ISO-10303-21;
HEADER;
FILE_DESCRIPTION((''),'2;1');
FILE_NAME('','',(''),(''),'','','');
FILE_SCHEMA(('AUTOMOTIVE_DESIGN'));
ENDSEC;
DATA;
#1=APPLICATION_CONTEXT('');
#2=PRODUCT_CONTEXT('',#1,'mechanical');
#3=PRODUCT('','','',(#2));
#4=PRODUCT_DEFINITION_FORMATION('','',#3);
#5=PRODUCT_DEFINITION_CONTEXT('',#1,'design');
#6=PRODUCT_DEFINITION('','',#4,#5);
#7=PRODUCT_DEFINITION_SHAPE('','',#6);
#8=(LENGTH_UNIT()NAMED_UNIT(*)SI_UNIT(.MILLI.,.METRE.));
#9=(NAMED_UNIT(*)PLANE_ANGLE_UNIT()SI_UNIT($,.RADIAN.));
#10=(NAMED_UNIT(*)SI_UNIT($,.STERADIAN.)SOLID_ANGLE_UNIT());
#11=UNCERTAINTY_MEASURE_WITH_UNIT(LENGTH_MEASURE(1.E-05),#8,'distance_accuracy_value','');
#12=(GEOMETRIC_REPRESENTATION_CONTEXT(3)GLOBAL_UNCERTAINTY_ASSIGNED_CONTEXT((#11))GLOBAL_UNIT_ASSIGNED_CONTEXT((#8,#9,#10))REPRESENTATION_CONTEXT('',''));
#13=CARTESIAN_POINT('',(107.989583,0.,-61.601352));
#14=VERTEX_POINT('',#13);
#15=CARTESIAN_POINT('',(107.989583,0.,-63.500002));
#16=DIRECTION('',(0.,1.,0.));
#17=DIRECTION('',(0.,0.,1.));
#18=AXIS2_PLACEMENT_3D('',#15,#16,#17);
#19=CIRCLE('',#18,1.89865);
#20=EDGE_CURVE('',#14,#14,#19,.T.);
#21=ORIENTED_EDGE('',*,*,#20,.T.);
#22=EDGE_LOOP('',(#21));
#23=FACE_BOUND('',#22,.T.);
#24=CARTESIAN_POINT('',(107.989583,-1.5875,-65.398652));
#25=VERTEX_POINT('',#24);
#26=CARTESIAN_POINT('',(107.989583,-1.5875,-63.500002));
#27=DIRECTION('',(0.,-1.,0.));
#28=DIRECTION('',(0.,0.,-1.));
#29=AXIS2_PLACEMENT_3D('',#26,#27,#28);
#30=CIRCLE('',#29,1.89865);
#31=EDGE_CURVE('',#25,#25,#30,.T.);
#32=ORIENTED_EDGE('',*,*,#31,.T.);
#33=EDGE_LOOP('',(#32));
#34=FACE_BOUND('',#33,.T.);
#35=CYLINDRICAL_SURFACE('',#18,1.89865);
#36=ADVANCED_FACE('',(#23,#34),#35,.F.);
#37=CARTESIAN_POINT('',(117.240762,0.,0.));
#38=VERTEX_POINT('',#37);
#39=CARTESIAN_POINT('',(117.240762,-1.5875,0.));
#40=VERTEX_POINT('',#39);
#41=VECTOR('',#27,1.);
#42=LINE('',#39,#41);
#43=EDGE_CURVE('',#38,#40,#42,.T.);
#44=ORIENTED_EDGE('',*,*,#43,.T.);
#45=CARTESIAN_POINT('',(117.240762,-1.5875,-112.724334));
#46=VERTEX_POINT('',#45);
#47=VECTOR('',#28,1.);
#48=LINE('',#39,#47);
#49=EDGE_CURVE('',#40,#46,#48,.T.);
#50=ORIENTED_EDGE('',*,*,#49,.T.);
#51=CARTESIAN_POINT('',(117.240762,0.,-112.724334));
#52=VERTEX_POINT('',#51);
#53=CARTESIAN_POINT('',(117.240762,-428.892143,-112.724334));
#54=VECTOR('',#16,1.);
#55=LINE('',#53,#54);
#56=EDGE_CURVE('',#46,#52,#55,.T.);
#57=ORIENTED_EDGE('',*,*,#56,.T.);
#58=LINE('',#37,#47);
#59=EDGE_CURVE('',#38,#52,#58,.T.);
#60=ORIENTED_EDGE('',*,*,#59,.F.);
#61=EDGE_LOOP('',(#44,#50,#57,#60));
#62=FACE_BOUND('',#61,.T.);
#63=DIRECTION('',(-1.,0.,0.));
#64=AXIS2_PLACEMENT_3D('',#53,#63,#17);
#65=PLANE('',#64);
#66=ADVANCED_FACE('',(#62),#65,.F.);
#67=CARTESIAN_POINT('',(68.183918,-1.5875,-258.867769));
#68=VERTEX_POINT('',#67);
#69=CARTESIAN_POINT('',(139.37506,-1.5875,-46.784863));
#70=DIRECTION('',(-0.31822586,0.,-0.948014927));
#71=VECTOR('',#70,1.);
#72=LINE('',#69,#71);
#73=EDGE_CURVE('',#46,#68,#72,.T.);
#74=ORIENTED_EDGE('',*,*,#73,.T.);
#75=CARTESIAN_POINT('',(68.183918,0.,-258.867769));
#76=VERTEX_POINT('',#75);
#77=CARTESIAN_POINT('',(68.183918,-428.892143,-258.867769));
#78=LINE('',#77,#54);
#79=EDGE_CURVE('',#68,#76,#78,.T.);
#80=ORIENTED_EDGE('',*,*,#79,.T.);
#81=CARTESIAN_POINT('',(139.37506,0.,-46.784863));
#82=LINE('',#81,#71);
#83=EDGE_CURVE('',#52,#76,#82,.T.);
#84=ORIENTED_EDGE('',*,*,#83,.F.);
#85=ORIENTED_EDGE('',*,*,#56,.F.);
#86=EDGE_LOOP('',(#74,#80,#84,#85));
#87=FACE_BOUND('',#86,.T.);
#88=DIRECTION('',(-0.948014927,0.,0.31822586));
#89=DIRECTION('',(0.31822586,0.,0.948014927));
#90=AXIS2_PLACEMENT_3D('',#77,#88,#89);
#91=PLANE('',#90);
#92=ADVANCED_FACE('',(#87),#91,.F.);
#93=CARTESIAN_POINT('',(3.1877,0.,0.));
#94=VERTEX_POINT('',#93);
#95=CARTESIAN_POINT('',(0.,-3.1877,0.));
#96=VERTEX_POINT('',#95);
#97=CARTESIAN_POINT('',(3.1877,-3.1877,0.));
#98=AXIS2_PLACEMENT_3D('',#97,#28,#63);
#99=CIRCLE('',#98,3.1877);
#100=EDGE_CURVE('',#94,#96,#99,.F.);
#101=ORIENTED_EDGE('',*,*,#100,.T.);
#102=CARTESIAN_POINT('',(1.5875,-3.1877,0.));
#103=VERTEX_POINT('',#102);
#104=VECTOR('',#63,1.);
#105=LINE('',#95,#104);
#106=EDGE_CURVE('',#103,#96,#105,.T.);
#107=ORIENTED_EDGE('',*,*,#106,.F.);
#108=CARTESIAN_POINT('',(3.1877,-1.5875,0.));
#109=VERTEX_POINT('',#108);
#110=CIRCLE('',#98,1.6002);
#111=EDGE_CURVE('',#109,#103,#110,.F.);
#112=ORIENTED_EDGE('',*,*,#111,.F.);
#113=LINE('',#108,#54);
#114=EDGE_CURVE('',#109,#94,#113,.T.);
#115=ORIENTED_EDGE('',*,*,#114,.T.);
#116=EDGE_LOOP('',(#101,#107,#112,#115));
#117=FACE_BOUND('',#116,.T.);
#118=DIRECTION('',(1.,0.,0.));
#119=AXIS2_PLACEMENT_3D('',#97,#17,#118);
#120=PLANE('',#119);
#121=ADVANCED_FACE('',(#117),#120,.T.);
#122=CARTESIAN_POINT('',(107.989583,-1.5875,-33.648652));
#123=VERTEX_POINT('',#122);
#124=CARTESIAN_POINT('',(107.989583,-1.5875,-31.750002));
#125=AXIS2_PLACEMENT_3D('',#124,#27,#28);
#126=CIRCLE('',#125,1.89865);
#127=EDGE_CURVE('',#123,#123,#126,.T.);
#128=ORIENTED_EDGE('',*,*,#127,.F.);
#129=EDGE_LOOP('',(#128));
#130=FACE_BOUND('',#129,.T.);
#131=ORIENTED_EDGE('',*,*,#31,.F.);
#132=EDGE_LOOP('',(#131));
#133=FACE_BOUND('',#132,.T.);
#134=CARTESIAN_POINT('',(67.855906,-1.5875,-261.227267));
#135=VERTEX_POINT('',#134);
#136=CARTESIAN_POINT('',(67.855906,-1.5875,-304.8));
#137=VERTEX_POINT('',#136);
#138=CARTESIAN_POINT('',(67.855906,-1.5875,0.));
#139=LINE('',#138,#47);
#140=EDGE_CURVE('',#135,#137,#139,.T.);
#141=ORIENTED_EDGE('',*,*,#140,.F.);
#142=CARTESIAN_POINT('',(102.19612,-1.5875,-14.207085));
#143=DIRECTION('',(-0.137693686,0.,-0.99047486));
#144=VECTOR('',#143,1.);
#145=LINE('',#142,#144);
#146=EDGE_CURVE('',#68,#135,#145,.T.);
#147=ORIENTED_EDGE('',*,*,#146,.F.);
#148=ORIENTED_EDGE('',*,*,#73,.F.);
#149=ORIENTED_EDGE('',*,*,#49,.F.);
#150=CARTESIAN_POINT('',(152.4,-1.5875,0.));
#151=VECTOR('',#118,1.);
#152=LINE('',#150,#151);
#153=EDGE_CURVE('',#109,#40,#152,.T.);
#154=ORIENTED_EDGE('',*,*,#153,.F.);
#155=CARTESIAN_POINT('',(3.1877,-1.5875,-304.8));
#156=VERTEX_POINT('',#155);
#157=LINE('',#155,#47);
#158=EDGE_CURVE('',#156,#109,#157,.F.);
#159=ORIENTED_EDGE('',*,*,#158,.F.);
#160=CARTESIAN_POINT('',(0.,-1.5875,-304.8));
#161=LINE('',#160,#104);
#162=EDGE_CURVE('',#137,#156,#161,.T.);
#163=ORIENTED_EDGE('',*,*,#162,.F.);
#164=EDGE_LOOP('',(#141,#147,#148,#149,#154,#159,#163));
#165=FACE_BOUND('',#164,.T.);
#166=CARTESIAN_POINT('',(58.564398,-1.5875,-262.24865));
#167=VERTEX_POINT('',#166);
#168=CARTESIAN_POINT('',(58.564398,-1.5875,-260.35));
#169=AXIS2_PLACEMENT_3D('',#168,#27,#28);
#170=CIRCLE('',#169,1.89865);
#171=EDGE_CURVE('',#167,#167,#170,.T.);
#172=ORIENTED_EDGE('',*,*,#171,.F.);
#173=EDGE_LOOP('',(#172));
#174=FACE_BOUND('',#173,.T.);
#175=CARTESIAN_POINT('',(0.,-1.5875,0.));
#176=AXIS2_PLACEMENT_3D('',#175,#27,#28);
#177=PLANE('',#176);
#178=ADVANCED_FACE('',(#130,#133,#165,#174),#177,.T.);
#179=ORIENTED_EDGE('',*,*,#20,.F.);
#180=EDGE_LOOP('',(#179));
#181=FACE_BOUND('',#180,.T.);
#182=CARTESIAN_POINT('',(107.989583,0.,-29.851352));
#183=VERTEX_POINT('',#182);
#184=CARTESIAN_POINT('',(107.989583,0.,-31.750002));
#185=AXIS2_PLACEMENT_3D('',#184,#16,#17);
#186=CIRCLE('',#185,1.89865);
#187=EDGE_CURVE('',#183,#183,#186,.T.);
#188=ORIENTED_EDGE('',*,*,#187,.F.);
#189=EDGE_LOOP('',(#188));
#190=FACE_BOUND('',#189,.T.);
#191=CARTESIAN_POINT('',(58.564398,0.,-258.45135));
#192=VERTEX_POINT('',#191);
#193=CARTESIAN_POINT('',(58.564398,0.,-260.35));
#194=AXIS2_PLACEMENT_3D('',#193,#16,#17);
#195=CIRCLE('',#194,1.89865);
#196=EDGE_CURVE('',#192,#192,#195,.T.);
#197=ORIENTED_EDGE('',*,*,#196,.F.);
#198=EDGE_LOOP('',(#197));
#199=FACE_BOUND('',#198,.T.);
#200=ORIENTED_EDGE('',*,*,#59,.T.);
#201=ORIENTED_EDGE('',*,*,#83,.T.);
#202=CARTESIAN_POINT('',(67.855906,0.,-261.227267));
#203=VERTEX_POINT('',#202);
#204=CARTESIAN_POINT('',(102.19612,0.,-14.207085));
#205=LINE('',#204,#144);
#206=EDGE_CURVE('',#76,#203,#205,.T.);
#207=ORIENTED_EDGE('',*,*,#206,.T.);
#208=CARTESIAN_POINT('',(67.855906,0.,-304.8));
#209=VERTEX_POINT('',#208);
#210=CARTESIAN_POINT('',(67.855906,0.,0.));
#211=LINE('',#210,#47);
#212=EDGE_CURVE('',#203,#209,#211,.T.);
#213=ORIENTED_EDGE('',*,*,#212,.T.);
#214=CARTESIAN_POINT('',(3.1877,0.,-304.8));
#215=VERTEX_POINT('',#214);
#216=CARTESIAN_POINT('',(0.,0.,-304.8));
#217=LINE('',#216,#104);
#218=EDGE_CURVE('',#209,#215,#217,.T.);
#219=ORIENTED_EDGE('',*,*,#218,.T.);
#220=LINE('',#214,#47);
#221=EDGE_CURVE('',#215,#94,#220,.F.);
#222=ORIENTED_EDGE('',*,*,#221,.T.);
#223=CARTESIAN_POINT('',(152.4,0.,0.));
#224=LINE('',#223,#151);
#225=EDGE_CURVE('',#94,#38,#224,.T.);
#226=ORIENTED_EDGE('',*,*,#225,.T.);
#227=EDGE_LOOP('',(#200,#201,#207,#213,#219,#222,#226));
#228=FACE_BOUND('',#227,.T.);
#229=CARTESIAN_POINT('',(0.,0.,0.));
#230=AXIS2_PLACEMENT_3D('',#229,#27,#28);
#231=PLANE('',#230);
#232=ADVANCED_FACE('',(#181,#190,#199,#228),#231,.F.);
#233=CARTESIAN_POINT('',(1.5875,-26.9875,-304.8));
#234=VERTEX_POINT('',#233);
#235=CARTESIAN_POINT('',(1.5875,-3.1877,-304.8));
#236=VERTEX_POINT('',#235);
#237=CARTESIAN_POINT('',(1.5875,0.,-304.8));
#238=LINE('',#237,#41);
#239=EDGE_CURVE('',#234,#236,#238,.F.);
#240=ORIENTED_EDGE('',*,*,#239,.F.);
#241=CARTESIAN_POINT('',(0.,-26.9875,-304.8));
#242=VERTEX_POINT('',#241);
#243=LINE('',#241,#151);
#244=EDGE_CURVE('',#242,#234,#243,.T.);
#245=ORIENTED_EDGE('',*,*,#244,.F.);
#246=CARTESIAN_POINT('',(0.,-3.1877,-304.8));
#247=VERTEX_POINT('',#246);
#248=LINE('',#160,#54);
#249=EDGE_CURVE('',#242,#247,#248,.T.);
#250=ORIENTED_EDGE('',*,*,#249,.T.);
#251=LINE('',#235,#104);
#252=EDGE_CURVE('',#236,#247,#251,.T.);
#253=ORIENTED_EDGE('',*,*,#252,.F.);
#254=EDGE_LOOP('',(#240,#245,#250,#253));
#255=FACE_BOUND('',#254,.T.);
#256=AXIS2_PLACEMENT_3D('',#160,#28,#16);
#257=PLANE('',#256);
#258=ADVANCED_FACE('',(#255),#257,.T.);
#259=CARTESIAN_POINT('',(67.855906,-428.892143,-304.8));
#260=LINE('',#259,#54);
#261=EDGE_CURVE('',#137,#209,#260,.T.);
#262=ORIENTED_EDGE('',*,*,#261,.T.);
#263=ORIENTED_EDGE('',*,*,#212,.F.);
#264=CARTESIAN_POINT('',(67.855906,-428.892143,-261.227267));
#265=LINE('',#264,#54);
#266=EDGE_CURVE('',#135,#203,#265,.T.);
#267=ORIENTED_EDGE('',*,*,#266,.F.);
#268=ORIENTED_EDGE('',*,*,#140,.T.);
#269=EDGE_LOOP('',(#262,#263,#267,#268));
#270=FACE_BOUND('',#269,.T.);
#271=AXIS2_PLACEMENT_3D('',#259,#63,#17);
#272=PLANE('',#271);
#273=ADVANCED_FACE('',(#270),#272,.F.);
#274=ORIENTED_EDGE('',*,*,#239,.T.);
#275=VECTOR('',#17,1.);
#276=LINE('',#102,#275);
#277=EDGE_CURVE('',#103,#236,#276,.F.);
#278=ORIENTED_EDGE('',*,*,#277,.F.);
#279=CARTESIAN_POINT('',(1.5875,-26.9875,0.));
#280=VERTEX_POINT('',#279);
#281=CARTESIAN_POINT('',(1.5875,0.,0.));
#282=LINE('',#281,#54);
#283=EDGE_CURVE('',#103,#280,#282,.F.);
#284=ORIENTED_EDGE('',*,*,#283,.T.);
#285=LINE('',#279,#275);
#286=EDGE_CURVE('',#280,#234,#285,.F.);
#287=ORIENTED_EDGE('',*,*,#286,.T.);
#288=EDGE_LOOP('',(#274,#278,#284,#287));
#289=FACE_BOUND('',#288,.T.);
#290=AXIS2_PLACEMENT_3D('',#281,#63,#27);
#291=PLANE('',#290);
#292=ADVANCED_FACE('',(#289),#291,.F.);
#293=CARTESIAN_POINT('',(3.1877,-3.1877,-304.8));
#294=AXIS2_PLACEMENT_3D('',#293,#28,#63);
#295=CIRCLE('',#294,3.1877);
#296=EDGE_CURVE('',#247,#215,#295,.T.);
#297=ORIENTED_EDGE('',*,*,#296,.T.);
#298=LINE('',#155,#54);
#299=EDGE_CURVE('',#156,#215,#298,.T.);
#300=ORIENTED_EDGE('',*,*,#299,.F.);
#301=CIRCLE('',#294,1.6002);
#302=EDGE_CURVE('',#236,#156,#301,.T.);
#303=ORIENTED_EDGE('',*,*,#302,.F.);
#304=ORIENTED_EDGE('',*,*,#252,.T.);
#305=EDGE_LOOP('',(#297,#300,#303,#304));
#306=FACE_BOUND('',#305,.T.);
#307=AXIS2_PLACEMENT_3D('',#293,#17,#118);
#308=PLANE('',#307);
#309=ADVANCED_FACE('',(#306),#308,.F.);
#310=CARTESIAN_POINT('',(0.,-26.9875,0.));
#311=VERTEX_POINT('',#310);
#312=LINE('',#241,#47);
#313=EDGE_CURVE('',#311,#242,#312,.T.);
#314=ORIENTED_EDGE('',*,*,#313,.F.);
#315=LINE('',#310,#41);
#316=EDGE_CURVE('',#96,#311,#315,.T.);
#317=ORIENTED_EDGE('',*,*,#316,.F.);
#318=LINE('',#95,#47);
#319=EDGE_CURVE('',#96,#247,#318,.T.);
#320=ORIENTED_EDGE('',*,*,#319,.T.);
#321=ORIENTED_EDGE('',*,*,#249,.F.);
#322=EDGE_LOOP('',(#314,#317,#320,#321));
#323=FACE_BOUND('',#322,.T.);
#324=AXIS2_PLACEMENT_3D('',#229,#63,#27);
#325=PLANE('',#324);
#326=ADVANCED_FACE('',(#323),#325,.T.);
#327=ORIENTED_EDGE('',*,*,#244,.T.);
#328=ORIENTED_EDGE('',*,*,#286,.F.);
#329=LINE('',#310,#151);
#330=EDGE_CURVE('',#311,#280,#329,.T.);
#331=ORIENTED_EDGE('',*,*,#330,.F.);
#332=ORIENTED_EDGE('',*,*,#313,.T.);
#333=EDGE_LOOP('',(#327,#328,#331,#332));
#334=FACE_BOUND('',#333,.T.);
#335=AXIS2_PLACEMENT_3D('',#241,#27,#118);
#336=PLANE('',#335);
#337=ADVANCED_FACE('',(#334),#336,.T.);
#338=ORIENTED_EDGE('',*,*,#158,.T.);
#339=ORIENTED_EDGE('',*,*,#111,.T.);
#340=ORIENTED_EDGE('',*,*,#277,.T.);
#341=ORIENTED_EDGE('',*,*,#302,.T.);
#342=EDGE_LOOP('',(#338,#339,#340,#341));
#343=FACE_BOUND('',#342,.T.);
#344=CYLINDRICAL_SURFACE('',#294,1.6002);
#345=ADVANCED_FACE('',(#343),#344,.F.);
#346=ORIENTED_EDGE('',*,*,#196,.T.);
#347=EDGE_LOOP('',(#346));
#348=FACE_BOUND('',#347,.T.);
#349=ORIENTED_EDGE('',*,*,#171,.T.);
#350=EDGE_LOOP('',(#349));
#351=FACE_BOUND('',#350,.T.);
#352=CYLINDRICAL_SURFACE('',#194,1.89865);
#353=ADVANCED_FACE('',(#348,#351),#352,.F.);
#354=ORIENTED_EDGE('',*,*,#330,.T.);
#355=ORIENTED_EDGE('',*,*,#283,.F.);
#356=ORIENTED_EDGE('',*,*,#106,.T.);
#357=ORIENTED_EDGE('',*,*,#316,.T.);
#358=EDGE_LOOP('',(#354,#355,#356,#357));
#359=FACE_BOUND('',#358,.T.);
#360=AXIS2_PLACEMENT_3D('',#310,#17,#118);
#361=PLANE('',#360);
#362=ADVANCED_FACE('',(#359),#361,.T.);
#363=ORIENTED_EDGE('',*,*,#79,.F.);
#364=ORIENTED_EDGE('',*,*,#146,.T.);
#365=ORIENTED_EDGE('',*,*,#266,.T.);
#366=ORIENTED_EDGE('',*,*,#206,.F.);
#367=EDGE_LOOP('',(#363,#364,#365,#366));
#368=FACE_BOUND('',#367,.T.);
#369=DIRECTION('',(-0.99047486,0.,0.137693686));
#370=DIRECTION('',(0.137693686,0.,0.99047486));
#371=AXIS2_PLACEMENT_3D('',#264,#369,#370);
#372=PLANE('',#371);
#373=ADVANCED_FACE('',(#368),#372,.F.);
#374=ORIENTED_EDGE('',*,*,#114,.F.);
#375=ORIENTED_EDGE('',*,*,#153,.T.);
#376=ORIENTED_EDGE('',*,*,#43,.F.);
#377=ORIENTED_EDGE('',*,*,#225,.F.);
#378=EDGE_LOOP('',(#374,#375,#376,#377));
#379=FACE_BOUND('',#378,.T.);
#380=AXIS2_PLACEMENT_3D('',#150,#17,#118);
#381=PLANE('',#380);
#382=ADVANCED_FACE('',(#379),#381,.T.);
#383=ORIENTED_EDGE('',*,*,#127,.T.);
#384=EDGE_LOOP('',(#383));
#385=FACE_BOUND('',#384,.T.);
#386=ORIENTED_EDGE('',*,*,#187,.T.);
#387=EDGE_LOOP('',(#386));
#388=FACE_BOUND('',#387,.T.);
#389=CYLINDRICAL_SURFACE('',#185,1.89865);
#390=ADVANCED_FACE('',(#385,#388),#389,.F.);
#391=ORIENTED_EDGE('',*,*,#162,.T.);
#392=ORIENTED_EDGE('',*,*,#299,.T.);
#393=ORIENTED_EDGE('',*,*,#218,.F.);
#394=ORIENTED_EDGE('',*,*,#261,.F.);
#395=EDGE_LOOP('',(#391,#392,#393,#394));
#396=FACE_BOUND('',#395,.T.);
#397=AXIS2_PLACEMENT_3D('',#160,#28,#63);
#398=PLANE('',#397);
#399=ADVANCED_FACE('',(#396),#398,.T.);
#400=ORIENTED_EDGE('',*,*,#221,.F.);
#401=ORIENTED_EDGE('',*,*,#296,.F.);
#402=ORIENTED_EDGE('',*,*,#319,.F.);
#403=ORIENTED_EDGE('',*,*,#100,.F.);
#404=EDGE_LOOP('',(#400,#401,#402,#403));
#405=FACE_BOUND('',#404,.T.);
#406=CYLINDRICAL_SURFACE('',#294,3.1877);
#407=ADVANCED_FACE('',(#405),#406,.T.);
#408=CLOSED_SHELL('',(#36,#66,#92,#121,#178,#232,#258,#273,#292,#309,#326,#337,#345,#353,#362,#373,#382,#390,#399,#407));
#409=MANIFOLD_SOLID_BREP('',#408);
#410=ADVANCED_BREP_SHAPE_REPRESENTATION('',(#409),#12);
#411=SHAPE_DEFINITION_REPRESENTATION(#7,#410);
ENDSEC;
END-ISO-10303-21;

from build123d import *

# Parameters (mm, degrees)
BASE_FLANGE1_DEPTH           = 1.5875
EDGE_FLANGE1_STRIP_W         = 9.5504
EDGE_FLANGE1_STRIP_H         = 1.5875
EDGE_FLANGE1_STRIP_CUT_DEPTH = 304.8
EDGE_FLANGE1_DEPTH           = 304.8
CUT_EXTRUDE1_DEPTH           = 342.722050796
CUT_EXTRUDE1_DEPTH_BACK      = 342.722050796
F_6_CLEARANCE_HOLE1_D        = 3.7973
F_6_CLEARANCE_HOLE2_D        = 3.7973


# Sheet-metal steps are written as plain solids
with BuildPart() as part:
    # Sketch1 → Base-Flange1 (new body)
    with BuildSketch(Plane(origin=(0, 0, 0), x_dir=(1, 0, 0), z_dir=(0, 1, 0))):
        Polygon((0, 304.8), (76.2, 304.8), (152.4, 0), (0, 0), align=None)
    extrude(amount=-BASE_FLANGE1_DEPTH)

    # Edge-Flange1 strip (across the edge) → Edge-Flange1 strip cut (cut)
    with BuildSketch(Plane(origin=(0, -1.5875, 0), x_dir=(1, 0, 0), z_dir=(0, 0, -1))):
        with Locations((-1.5875, -0.79375)):
            Rectangle(EDGE_FLANGE1_STRIP_W, EDGE_FLANGE1_STRIP_H)
    extrude(amount=EDGE_FLANGE1_STRIP_CUT_DEPTH, mode=Mode.SUBTRACT)

    # Edge-Flange1 section (across the edge) → Edge-Flange1 (add)
    with BuildSketch(Plane(origin=(0, -1.5875, 0), x_dir=(1, 0, 0), z_dir=(0, 0, -1))):
        with BuildLine():
            Line((0, 1.6002), (0, 25.4))
            Line((0, 25.4), (1.5875, 25.4))
            Line((1.5875, 25.4), (1.5875, 1.6002))
            ThreePointArc((1.5875, 1.6002), (2.056187729, 0.468687729), (3.1877, 0))
            Line((3.1877, 0), (3.1877, -1.5875))
            ThreePointArc((3.1877, -1.5875), (0.933655714, -0.653844286), (0, 1.6002))
        make_face()
    extrude(amount=EDGE_FLANGE1_DEPTH)

    # Sketch9 → Cut-Extrude1 (cut, two sides: drawn at the far end of the back side and taken through both)
    with BuildSketch(Plane(origin=(0, -1.5875, 0), x_dir=(-1, 0, 0), z_dir=(0, -1, 0)).offset(-CUT_EXTRUDE1_DEPTH_BACK)):
        Polygon((-67.85590566, 967.941443334), (-67.85590566, 304.8), (-67.85590566, 261.227267277), (-68.183918061, 258.867768839), (-116.937952517, 113.626422367), (-117.240761897, 112.724334108), (-117.240761897, 0), (-117.240761897, -663.141443334), (-1442.916152839, -623.003514641), (-1393.531296603, 1008.079372028), align=None)
    extrude(amount=CUT_EXTRUDE1_DEPTH + CUT_EXTRUDE1_DEPTH_BACK, mode=Mode.SUBTRACT)

    # #6 Clearance Hole1 (through all)
    with Locations(Plane(origin=(0, 0, 0), x_dir=(1, 0, 0), z_dir=(0, 1, 0))):
        with Locations((58.564398425, 260.349999742)):
            Hole(F_6_CLEARANCE_HOLE1_D / 2)

    # #6 Clearance Hole2 (through all)
    with Locations(Plane(origin=(0, 0, 0), x_dir=(1, 0, 0), z_dir=(0, 1, 0))):
        with Locations((107.989583034, 31.750001764), (107.989583034, 63.500001764)):
            Hole(F_6_CLEARANCE_HOLE2_D / 2)


solid = part.part
